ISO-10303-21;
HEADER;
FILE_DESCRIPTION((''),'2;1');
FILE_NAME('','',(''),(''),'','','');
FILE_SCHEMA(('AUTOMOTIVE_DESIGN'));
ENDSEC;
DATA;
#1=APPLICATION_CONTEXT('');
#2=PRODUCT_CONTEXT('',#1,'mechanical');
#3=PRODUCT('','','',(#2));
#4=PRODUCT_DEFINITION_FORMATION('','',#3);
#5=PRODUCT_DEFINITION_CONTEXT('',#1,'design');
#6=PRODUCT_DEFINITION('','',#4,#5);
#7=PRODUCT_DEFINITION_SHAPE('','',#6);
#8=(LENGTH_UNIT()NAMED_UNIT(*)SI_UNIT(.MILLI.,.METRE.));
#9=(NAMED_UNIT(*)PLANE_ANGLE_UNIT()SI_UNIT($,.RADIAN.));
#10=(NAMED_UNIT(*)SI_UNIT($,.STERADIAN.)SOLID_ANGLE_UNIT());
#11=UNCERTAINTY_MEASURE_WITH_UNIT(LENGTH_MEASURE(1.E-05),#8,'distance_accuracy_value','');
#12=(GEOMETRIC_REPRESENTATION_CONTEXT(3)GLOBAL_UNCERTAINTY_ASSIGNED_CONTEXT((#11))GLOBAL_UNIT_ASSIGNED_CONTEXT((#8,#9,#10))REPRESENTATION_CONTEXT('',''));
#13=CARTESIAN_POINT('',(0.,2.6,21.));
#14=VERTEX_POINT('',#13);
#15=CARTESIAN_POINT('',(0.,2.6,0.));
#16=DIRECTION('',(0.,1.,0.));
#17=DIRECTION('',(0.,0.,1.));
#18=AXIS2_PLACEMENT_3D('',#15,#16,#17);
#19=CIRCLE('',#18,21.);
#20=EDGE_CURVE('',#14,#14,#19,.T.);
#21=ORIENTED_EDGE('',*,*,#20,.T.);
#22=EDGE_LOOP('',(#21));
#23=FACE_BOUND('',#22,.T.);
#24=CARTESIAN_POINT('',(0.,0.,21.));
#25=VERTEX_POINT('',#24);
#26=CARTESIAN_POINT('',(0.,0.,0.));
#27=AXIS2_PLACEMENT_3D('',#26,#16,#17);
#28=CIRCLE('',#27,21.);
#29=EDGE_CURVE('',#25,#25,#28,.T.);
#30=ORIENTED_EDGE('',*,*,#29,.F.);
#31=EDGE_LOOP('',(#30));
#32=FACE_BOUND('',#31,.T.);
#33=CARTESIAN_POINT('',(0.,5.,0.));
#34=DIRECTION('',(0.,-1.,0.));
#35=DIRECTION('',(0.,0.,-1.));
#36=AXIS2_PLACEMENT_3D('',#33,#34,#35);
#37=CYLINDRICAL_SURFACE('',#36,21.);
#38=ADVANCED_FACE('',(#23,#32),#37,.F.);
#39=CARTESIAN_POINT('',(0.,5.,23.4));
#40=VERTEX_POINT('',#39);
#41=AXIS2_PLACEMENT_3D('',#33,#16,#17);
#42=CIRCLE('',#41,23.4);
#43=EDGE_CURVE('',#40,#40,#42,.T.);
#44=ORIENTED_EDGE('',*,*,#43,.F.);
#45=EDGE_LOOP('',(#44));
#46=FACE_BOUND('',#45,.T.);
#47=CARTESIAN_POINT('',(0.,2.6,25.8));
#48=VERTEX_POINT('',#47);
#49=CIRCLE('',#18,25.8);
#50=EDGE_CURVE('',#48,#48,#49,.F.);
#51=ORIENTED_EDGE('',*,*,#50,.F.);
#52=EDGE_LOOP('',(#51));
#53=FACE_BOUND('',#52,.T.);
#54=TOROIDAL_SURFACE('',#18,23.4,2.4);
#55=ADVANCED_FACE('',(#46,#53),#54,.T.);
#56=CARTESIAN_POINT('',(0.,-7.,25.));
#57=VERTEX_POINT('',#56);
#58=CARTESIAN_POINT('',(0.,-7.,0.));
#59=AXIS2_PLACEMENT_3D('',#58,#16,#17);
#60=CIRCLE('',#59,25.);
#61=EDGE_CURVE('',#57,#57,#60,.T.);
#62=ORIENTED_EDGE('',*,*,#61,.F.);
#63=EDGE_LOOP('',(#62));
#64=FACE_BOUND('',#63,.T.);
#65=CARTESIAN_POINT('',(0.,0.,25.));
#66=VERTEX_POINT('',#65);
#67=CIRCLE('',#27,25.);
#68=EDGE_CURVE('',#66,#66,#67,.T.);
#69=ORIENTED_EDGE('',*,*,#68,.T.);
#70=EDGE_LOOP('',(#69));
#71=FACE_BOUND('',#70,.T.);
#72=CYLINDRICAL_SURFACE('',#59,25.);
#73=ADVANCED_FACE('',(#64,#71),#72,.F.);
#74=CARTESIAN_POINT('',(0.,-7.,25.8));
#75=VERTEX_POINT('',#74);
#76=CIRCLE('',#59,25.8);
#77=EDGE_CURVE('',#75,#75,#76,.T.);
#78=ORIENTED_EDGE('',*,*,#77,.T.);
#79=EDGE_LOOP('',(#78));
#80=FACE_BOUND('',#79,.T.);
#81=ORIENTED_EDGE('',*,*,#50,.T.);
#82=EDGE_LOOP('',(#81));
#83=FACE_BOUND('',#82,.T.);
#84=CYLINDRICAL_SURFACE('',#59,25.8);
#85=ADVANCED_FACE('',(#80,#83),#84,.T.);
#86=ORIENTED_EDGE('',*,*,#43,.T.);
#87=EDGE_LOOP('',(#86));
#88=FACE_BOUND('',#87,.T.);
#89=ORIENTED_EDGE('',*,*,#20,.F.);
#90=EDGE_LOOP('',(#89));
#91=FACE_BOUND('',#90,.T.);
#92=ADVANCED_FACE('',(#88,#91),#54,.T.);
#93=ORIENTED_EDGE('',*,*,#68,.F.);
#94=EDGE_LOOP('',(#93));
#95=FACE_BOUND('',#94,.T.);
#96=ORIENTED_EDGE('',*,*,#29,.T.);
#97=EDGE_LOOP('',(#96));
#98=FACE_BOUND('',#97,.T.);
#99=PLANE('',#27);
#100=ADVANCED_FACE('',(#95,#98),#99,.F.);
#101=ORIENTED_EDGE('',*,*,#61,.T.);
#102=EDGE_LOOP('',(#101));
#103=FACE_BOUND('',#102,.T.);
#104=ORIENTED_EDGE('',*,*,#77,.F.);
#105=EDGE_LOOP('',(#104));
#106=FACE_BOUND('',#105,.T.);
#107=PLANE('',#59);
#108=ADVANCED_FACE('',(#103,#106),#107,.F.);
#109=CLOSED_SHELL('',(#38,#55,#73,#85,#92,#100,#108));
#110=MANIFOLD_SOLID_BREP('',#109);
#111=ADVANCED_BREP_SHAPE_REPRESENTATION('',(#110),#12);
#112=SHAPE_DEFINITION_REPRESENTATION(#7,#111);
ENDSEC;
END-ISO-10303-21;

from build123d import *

# Parameters (mm, degrees)
SKETCH1_R           = 25.8
SKETCH1_R_2         = 25
BOSS_EXTRUDE1_DEPTH = 7
BOSS_EXTRUDE2_START = 5
SKETCH2_R           = 25.8
SKETCH2_R_2         = 21
BOSS_EXTRUDE2_DEPTH = 5
FILLET3_R           = 2.4


with BuildPart() as part:
    # Sketch1 → Boss-Extrude1 (new body)
    with BuildSketch(Plane(origin=(0, 0, 0), x_dir=(1, 0, 0), z_dir=(0, 1, 0))):
        with Locations(Location((0, 0, 0), (0, 0, 270))):
            Circle(SKETCH1_R)
        with Locations(Location((0, 0, 0), (0, 0, 270))):
            Circle(SKETCH1_R_2, mode=Mode.SUBTRACT)
    extrude(amount=-BOSS_EXTRUDE1_DEPTH)

    # Sketch2 → Boss-Extrude2 (add)
    with BuildSketch(Plane(origin=(0, 0, 0), x_dir=(1, 0, 0), z_dir=(0, 1, 0)).offset(BOSS_EXTRUDE2_START)):
        with Locations(Location((0, 0, 0), (0, 0, 270))):
            Circle(SKETCH2_R)
        with Locations(Location((0, 0, 0), (0, 0, 270))):
            Circle(SKETCH2_R_2, mode=Mode.SUBTRACT)
    extrude(amount=-BOSS_EXTRUDE2_DEPTH)

    # Fillet3
    fillet3_edges = [part.edges().sort_by_distance(p)[0] for p in [
        (0, 5, -25.8),
        (0, 5, -21),
    ]]
    fillet(fillet3_edges, radius=FILLET3_R - 0.0001)  # a hair under: the kernel refuses the full size


solid = part.part
